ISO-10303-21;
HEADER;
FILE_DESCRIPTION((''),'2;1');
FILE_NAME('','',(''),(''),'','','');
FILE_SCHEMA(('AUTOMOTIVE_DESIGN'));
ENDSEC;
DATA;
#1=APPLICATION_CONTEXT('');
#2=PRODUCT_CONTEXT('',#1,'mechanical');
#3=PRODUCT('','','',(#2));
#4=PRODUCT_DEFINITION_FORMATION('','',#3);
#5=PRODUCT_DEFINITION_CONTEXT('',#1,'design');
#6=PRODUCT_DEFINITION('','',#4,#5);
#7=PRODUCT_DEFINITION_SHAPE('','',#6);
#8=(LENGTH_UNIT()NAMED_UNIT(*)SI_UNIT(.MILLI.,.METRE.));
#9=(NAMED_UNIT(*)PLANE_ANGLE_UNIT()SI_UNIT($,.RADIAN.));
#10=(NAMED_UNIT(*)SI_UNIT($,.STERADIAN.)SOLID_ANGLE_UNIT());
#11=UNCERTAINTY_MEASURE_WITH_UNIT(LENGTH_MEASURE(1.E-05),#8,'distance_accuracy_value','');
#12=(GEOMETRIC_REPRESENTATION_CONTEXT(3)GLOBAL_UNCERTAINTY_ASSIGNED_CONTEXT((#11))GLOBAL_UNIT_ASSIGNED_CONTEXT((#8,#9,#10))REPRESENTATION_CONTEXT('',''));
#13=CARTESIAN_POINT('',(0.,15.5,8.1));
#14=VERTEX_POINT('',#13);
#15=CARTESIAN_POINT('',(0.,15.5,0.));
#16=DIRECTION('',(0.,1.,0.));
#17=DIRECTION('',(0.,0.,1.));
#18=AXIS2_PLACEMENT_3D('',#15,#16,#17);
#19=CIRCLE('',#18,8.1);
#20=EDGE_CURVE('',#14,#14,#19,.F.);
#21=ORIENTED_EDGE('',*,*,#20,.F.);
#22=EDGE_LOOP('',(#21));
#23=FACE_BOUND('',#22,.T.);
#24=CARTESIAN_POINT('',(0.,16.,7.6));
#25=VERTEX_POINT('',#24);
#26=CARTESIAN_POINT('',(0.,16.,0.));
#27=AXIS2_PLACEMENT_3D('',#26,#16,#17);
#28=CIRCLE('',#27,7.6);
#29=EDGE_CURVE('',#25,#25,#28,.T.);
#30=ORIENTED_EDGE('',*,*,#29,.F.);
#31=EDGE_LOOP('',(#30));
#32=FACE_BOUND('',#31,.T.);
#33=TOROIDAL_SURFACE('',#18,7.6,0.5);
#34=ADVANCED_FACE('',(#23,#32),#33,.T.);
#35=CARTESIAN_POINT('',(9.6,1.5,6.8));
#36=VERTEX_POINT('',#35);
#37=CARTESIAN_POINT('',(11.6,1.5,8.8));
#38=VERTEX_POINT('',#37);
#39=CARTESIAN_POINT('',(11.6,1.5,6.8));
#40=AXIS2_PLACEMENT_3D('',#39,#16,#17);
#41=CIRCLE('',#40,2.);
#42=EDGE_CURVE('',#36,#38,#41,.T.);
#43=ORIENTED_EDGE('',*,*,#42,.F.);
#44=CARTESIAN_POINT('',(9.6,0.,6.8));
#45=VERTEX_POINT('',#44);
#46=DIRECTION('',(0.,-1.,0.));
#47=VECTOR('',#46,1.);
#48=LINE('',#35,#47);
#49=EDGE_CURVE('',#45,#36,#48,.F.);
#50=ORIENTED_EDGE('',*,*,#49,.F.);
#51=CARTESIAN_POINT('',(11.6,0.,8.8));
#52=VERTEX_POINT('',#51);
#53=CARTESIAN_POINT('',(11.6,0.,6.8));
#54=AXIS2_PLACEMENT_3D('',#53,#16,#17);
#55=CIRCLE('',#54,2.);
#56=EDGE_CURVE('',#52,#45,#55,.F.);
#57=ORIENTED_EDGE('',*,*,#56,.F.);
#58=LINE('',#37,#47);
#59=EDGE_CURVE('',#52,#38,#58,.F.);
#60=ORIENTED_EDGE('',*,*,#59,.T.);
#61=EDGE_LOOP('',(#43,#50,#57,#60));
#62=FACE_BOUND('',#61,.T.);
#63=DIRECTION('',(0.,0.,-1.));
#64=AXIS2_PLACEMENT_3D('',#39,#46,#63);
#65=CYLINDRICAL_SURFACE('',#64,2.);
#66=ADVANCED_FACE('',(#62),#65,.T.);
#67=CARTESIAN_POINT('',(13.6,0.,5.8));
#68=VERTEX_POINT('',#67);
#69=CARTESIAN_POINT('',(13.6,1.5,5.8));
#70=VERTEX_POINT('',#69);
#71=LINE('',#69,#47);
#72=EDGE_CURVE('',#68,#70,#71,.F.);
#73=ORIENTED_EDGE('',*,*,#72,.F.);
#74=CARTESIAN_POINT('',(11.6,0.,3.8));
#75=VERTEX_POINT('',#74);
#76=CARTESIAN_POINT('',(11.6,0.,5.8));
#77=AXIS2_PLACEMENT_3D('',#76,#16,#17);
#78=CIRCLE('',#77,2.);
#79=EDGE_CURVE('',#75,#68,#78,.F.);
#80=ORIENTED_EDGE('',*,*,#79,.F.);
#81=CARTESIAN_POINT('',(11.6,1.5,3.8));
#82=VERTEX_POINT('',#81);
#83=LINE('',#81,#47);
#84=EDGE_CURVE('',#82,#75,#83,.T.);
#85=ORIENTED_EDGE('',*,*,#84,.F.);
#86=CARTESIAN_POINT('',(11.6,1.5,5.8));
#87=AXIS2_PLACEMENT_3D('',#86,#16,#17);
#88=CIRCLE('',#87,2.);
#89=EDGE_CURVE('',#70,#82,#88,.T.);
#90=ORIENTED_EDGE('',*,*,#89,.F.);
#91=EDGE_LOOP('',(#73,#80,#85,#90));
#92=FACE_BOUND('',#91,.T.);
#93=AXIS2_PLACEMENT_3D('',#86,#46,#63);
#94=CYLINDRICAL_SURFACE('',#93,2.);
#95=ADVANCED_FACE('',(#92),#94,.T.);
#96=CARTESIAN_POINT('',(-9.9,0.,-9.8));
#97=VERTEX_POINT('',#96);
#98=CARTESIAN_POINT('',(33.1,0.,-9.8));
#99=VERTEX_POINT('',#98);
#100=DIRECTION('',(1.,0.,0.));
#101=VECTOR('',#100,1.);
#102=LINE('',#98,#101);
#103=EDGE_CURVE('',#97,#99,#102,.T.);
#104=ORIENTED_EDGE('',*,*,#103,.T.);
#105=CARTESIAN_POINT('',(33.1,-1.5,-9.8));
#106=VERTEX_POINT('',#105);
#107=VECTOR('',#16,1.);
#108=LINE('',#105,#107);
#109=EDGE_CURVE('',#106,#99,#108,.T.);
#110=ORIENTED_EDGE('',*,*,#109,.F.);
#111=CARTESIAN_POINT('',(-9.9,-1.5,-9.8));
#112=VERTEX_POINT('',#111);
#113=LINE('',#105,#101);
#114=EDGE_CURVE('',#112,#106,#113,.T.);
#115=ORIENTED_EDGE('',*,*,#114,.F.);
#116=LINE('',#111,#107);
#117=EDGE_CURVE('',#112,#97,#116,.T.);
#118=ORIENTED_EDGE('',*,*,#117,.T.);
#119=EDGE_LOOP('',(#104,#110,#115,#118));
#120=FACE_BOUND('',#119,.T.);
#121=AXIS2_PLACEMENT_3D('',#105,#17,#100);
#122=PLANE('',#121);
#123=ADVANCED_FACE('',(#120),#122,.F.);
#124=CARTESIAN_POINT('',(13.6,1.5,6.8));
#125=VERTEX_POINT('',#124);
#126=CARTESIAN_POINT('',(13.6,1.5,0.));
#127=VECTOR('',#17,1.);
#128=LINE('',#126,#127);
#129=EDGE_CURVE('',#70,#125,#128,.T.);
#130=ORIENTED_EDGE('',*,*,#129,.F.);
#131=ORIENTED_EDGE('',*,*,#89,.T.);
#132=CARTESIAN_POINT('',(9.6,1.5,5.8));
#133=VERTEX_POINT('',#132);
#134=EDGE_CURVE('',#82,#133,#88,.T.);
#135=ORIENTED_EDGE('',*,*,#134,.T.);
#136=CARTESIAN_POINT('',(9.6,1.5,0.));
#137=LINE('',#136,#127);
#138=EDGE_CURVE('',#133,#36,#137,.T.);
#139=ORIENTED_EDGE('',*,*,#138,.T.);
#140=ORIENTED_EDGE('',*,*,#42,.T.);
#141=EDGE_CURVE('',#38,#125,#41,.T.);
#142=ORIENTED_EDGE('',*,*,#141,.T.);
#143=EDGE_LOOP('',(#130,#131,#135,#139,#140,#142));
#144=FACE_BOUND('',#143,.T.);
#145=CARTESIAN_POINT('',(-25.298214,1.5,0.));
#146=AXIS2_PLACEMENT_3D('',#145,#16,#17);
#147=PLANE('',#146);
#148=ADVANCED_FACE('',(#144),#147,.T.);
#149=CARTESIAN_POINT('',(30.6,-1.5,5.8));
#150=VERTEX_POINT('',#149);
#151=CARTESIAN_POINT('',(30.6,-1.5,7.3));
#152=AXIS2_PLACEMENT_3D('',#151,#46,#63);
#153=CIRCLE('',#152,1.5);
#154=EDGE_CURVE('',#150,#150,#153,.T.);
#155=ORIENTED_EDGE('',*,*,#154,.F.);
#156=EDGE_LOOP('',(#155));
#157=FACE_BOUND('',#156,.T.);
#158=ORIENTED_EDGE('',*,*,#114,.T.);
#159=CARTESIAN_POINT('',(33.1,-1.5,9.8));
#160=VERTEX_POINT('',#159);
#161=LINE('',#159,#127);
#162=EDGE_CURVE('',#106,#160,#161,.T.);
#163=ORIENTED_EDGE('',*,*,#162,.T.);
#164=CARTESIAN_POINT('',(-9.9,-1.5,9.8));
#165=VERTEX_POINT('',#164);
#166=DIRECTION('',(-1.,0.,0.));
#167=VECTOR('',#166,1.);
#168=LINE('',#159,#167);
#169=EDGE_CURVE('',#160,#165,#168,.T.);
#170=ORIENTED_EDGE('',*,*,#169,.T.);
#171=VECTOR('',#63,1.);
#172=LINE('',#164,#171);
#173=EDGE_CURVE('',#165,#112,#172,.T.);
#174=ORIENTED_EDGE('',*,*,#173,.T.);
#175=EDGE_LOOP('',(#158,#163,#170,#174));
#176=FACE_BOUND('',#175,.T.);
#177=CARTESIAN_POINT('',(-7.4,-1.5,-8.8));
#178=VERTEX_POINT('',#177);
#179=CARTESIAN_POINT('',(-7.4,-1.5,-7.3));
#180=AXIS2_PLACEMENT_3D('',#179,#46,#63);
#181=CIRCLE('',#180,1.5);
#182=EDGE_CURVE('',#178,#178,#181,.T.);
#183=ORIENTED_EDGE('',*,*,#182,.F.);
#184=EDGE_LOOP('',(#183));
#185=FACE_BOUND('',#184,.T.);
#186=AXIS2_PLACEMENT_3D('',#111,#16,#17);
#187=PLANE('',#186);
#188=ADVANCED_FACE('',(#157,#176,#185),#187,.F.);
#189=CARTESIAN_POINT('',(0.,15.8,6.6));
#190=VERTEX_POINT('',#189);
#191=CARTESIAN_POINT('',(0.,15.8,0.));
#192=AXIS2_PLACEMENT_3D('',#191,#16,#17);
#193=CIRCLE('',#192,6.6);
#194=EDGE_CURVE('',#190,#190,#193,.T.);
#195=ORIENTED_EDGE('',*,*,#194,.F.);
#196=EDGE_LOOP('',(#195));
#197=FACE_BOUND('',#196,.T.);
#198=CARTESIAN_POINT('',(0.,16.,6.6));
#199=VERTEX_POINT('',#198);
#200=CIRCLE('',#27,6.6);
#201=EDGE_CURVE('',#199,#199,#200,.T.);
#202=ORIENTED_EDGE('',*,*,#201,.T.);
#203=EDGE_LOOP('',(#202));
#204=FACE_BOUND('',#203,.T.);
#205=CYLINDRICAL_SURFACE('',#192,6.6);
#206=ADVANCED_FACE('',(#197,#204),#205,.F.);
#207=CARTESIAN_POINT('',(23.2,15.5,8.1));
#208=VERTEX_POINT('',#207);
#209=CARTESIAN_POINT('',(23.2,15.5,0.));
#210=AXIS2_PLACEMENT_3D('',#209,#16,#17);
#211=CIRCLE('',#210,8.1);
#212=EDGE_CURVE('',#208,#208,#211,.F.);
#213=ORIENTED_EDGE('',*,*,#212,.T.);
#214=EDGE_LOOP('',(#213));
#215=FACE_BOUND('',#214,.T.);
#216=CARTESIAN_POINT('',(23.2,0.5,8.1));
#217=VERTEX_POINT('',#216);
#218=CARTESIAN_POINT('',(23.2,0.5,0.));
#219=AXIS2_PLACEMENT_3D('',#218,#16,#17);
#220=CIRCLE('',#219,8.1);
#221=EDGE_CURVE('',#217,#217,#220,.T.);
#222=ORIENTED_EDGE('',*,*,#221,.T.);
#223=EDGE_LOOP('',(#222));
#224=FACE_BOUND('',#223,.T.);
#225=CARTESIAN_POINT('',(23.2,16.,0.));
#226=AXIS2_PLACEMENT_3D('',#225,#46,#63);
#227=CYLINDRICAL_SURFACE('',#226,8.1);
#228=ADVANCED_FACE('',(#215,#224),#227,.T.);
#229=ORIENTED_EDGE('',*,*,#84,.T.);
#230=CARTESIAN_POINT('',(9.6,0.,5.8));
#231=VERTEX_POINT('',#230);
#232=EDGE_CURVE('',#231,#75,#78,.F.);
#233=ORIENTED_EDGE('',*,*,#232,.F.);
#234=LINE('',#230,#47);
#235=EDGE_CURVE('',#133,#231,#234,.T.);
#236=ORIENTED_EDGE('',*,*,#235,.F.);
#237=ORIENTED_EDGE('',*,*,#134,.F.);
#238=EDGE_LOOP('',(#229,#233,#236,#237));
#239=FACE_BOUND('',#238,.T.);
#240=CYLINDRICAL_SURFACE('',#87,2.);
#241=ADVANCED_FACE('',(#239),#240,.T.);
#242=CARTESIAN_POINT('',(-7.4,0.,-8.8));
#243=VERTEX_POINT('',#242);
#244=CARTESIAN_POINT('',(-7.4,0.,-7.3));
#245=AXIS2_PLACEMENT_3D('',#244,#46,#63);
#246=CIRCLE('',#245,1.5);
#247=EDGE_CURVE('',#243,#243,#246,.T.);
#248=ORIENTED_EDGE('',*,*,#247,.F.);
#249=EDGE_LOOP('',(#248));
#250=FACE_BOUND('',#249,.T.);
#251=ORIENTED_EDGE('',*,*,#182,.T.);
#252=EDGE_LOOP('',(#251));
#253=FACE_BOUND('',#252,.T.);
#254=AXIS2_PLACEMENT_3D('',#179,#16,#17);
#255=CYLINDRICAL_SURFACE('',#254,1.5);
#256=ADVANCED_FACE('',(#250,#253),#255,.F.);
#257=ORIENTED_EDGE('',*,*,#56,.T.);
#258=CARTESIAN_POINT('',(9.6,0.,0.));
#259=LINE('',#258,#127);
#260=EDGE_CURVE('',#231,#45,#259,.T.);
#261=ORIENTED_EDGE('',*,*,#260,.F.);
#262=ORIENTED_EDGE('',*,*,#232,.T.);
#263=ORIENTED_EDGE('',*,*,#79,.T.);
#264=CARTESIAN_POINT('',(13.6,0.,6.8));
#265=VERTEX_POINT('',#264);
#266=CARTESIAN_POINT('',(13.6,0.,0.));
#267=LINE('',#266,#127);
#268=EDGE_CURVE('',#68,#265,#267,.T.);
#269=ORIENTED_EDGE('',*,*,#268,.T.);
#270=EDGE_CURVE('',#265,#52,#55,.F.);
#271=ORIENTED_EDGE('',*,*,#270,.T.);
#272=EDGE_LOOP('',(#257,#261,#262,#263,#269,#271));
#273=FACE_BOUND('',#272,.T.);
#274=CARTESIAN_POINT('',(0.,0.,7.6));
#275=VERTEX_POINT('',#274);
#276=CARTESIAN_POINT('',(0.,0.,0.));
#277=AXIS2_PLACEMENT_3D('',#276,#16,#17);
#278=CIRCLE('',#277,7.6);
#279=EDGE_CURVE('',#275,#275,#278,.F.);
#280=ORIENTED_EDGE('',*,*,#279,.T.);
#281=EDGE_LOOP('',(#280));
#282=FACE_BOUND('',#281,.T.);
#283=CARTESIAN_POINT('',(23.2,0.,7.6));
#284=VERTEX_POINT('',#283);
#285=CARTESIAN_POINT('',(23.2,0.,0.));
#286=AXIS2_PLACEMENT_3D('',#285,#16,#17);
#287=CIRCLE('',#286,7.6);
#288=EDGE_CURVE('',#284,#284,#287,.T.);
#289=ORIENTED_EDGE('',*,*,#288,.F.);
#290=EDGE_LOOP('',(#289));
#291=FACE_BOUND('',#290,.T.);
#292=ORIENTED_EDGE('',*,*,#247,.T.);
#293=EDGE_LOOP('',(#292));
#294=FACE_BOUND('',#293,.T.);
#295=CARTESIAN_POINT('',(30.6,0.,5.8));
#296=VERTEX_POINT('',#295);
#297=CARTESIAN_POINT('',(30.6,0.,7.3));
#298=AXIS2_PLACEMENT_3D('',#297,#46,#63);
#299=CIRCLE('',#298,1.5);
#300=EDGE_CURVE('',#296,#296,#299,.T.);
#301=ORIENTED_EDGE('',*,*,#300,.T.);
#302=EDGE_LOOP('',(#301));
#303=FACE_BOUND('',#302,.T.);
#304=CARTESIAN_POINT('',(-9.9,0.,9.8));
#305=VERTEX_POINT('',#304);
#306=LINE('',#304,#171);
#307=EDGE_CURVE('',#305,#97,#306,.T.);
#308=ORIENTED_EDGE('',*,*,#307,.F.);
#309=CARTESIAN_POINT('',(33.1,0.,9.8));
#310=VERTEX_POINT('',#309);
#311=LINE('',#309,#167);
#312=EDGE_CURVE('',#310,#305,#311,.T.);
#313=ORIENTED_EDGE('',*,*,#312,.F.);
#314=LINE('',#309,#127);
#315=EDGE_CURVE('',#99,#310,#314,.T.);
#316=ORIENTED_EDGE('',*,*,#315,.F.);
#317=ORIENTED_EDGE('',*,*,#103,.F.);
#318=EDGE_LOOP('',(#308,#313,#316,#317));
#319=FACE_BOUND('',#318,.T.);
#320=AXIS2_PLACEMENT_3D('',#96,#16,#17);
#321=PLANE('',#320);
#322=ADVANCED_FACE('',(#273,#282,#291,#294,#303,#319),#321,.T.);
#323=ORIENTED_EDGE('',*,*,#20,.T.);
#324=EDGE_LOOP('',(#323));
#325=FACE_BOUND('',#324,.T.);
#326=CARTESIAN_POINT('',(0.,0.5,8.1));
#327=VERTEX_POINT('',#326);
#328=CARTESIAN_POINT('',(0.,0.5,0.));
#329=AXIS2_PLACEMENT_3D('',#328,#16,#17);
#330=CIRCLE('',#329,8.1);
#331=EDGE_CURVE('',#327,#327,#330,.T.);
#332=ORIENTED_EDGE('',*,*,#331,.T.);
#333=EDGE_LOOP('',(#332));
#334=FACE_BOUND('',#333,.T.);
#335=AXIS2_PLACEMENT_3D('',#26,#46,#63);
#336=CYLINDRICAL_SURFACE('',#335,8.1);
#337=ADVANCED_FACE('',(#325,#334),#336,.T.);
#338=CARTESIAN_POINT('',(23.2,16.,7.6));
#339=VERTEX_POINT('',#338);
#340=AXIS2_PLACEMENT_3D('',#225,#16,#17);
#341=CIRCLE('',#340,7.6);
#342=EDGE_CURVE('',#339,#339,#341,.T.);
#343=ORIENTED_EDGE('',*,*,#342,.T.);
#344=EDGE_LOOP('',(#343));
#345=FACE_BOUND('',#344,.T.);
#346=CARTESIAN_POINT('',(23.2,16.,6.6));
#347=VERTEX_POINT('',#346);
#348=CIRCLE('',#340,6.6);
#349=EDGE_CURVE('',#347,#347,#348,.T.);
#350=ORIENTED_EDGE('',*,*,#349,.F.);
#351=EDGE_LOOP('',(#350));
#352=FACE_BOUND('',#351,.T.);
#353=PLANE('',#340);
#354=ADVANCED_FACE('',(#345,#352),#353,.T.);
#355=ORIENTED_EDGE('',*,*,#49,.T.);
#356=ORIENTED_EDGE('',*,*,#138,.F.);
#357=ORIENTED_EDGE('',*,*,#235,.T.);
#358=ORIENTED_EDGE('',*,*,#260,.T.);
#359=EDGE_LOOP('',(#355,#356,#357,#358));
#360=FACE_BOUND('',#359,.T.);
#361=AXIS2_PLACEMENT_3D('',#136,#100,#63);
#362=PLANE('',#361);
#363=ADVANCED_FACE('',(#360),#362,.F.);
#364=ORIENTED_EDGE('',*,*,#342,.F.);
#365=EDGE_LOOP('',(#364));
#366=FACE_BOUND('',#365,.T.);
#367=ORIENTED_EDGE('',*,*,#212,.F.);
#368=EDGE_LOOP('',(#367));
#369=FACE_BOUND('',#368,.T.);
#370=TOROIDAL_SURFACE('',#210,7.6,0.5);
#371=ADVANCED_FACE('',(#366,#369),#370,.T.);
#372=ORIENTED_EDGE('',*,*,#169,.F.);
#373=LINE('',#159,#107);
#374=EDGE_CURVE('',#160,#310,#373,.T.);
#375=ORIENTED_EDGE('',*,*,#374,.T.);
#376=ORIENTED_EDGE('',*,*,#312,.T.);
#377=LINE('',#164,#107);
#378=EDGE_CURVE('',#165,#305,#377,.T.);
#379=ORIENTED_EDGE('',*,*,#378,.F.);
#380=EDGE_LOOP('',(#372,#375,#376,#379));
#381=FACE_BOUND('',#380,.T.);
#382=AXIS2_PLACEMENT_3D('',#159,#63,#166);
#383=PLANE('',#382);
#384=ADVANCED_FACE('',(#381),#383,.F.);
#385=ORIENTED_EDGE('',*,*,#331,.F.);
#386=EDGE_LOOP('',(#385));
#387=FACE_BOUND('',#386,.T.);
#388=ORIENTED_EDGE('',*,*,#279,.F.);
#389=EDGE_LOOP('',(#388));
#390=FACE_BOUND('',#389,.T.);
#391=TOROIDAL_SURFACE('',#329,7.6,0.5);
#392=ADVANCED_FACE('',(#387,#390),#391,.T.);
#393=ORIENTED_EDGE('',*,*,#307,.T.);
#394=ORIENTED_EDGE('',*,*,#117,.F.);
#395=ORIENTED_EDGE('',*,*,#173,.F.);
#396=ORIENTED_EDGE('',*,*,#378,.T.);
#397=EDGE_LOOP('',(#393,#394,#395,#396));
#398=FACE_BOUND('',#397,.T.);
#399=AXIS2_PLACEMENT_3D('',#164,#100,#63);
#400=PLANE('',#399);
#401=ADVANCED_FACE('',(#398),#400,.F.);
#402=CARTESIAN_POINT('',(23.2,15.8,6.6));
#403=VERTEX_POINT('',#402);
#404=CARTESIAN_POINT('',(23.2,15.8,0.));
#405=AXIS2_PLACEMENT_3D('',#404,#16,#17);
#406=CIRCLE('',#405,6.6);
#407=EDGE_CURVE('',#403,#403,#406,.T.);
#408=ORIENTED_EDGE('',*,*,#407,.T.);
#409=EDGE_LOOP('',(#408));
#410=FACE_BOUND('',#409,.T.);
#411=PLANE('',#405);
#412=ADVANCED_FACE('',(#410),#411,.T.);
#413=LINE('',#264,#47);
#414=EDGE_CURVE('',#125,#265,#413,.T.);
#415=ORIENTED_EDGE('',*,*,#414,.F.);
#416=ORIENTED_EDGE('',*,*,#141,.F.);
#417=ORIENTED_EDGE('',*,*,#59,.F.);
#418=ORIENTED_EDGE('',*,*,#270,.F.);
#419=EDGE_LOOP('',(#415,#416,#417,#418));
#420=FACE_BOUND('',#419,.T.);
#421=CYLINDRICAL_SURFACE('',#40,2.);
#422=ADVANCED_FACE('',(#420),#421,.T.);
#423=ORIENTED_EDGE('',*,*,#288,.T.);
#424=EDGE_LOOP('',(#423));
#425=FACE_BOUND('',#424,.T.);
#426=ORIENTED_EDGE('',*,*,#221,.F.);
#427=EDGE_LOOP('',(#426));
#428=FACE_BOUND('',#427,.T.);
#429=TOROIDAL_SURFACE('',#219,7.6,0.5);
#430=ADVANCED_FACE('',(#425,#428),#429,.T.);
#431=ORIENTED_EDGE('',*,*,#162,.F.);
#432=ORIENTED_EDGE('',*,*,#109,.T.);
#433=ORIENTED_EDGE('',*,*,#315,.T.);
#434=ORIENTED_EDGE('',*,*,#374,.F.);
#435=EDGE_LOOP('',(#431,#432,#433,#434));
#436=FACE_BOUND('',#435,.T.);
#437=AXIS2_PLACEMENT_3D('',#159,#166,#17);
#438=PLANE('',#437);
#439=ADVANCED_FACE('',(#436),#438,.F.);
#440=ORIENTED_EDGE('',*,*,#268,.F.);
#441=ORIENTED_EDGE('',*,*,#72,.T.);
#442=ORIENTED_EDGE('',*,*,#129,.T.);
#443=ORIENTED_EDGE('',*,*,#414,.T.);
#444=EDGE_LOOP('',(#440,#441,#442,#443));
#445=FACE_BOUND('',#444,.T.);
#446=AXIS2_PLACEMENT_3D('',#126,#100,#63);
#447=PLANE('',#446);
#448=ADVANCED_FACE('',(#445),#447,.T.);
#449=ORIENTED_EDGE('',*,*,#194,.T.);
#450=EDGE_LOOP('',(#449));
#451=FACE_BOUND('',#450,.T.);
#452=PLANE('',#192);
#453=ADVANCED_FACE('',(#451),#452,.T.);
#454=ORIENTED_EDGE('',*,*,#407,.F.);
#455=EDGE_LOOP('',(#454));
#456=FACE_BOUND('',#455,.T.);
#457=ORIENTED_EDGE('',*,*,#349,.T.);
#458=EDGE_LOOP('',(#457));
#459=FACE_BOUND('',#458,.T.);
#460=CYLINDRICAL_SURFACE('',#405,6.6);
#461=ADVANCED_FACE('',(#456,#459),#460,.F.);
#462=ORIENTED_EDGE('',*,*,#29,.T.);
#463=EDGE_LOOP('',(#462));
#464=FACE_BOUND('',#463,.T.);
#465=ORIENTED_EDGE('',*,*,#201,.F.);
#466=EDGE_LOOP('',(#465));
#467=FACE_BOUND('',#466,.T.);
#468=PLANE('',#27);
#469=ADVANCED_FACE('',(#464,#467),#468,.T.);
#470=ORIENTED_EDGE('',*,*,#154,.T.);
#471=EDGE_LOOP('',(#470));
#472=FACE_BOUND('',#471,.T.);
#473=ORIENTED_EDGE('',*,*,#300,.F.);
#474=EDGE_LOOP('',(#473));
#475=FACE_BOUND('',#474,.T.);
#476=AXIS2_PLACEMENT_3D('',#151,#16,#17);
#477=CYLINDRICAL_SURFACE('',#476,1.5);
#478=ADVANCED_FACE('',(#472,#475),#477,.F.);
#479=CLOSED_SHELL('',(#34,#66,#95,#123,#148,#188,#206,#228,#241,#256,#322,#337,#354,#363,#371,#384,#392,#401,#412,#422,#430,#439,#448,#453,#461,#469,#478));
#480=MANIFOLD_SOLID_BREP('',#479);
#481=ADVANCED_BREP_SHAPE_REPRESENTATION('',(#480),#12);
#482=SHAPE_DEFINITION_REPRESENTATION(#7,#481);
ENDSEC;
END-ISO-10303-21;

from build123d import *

# Parameters (mm, degrees)
SKETCH1_R          = 8.1
EXTRUDE1_DEPTH     = 16
EXTRUDE1_2_DEPTH   = 16
FILLET1_R          = 0.5
SKETCH2_R          = 6.6
CUT_EXTRUDE2_DEPTH = 0.2
FILLET2_R          = 0.5
SKETCH3_W          = 43
SKETCH3_H          = 19.6
SKETCH3_R          = 1.5
EXTRUDE2_DEPTH     = 1.5
SKETCH4_W          = 2
SKETCH4_H          = 5
EXTRUDE3_DEPTH     = 1.5
FILLET3_R          = 2


with BuildPart() as part:
    # Sketch1 → Extrude1 (new body)
    with BuildSketch(Plane(origin=(0, 0, 0), x_dir=(1, 0, 0), z_dir=(0, 1, 0))):
        with Locations(Location((0, 0, 0), (0, 0, 270))):
            Circle(SKETCH1_R)
    extrude(amount=EXTRUDE1_DEPTH)

    # Fillet1
    fillet1_edges = [part.edges().sort_by_distance(p)[0] for p in [
        (0, 0, -8.1),
        (0, 16, -8.1),
    ]]
    fillet(fillet1_edges, radius=FILLET1_R)


with BuildPart() as body_2:
    # Sketch1 → Extrude1 2 (new body)
    with BuildSketch(Plane(origin=(0, 0, 0), x_dir=(1, 0, 0), z_dir=(0, 1, 0))):
        with Locations(Location((23.2, 0, 0), (0, 0, 270))):
            Circle(SKETCH1_R)
    extrude(amount=EXTRUDE1_2_DEPTH)


with BuildPart() as cut_extrude2_tool:
    # Sketch2 → Cut-Extrude2 (new body)
    with BuildSketch(Plane(origin=(0, 16, 0), x_dir=(-1, 0, 0), z_dir=(0, 1, 0))):
        with Locations(Location((-23.2, 0, 0), (0, 0, 90))):
            Circle(SKETCH2_R)
        with Locations(Location((0, 0, 0), (0, 0, 90))):
            Circle(SKETCH2_R)
    extrude(amount=-CUT_EXTRUDE2_DEPTH)


with BuildPart() as part_1:
    add(part.part)

    # Cut-Extrude2: cut by cut_extrude2_tool
    add(cut_extrude2_tool.part, mode=Mode.SUBTRACT)



with BuildPart() as body_2_1:
    add(body_2.part)

    # Cut-Extrude2: cut by cut_extrude2_tool
    add(cut_extrude2_tool.part, mode=Mode.SUBTRACT)

    # Fillet2
    fillet2_edges = [body_2_1.edges().sort_by_distance(p)[0] for p in [
        (23.2, 0, -8.1),
        (23.2, 16, -8.1),
    ]]
    fillet(fillet2_edges, radius=FILLET2_R)


with BuildPart() as part_2:
    add(part_1.part)

    add(body_2_1.part)  # Extrude2 merges body 2
    # Sketch3 → Extrude2 (add)
    with BuildSketch(Plane.XZ):
        with Locations((11.6, 0)):
            Rectangle(SKETCH3_W, SKETCH3_H)
        with Locations(Location((-7.4, -7.3, 0), (0, 0, 270))):
            Circle(SKETCH3_R, mode=Mode.SUBTRACT)
        with Locations(Location((30.6, 7.3, 0), (0, 0, 270))):
            Circle(SKETCH3_R, mode=Mode.SUBTRACT)
    extrude(amount=EXTRUDE2_DEPTH)

    # Sketch4 → Extrude3 (add)
    with BuildSketch(Plane(origin=(0, 0, 0), x_dir=(-1, 0, 0), z_dir=(0, 1, 0))):
        with Locations((-10.6, 6.3)):
            Rectangle(SKETCH4_W, SKETCH4_H)
        with Locations((-12.6, 6.3)):
            Rectangle(SKETCH4_W, SKETCH4_H)
    extrude(amount=EXTRUDE3_DEPTH)

    # Fillet3
    fillet3_edges = [part_2.edges().sort_by_distance(p)[0] for p in [
        (9.6, 0.75, 3.8),
        (13.6, 0.75, 3.8),
        (9.6, 0.75, 8.8),
        (13.6, 0.75, 8.8),
    ]]
    fillet(fillet3_edges, radius=FILLET3_R - 0.0001)  # a hair under: the kernel refuses the full size


solid = part_2.part
